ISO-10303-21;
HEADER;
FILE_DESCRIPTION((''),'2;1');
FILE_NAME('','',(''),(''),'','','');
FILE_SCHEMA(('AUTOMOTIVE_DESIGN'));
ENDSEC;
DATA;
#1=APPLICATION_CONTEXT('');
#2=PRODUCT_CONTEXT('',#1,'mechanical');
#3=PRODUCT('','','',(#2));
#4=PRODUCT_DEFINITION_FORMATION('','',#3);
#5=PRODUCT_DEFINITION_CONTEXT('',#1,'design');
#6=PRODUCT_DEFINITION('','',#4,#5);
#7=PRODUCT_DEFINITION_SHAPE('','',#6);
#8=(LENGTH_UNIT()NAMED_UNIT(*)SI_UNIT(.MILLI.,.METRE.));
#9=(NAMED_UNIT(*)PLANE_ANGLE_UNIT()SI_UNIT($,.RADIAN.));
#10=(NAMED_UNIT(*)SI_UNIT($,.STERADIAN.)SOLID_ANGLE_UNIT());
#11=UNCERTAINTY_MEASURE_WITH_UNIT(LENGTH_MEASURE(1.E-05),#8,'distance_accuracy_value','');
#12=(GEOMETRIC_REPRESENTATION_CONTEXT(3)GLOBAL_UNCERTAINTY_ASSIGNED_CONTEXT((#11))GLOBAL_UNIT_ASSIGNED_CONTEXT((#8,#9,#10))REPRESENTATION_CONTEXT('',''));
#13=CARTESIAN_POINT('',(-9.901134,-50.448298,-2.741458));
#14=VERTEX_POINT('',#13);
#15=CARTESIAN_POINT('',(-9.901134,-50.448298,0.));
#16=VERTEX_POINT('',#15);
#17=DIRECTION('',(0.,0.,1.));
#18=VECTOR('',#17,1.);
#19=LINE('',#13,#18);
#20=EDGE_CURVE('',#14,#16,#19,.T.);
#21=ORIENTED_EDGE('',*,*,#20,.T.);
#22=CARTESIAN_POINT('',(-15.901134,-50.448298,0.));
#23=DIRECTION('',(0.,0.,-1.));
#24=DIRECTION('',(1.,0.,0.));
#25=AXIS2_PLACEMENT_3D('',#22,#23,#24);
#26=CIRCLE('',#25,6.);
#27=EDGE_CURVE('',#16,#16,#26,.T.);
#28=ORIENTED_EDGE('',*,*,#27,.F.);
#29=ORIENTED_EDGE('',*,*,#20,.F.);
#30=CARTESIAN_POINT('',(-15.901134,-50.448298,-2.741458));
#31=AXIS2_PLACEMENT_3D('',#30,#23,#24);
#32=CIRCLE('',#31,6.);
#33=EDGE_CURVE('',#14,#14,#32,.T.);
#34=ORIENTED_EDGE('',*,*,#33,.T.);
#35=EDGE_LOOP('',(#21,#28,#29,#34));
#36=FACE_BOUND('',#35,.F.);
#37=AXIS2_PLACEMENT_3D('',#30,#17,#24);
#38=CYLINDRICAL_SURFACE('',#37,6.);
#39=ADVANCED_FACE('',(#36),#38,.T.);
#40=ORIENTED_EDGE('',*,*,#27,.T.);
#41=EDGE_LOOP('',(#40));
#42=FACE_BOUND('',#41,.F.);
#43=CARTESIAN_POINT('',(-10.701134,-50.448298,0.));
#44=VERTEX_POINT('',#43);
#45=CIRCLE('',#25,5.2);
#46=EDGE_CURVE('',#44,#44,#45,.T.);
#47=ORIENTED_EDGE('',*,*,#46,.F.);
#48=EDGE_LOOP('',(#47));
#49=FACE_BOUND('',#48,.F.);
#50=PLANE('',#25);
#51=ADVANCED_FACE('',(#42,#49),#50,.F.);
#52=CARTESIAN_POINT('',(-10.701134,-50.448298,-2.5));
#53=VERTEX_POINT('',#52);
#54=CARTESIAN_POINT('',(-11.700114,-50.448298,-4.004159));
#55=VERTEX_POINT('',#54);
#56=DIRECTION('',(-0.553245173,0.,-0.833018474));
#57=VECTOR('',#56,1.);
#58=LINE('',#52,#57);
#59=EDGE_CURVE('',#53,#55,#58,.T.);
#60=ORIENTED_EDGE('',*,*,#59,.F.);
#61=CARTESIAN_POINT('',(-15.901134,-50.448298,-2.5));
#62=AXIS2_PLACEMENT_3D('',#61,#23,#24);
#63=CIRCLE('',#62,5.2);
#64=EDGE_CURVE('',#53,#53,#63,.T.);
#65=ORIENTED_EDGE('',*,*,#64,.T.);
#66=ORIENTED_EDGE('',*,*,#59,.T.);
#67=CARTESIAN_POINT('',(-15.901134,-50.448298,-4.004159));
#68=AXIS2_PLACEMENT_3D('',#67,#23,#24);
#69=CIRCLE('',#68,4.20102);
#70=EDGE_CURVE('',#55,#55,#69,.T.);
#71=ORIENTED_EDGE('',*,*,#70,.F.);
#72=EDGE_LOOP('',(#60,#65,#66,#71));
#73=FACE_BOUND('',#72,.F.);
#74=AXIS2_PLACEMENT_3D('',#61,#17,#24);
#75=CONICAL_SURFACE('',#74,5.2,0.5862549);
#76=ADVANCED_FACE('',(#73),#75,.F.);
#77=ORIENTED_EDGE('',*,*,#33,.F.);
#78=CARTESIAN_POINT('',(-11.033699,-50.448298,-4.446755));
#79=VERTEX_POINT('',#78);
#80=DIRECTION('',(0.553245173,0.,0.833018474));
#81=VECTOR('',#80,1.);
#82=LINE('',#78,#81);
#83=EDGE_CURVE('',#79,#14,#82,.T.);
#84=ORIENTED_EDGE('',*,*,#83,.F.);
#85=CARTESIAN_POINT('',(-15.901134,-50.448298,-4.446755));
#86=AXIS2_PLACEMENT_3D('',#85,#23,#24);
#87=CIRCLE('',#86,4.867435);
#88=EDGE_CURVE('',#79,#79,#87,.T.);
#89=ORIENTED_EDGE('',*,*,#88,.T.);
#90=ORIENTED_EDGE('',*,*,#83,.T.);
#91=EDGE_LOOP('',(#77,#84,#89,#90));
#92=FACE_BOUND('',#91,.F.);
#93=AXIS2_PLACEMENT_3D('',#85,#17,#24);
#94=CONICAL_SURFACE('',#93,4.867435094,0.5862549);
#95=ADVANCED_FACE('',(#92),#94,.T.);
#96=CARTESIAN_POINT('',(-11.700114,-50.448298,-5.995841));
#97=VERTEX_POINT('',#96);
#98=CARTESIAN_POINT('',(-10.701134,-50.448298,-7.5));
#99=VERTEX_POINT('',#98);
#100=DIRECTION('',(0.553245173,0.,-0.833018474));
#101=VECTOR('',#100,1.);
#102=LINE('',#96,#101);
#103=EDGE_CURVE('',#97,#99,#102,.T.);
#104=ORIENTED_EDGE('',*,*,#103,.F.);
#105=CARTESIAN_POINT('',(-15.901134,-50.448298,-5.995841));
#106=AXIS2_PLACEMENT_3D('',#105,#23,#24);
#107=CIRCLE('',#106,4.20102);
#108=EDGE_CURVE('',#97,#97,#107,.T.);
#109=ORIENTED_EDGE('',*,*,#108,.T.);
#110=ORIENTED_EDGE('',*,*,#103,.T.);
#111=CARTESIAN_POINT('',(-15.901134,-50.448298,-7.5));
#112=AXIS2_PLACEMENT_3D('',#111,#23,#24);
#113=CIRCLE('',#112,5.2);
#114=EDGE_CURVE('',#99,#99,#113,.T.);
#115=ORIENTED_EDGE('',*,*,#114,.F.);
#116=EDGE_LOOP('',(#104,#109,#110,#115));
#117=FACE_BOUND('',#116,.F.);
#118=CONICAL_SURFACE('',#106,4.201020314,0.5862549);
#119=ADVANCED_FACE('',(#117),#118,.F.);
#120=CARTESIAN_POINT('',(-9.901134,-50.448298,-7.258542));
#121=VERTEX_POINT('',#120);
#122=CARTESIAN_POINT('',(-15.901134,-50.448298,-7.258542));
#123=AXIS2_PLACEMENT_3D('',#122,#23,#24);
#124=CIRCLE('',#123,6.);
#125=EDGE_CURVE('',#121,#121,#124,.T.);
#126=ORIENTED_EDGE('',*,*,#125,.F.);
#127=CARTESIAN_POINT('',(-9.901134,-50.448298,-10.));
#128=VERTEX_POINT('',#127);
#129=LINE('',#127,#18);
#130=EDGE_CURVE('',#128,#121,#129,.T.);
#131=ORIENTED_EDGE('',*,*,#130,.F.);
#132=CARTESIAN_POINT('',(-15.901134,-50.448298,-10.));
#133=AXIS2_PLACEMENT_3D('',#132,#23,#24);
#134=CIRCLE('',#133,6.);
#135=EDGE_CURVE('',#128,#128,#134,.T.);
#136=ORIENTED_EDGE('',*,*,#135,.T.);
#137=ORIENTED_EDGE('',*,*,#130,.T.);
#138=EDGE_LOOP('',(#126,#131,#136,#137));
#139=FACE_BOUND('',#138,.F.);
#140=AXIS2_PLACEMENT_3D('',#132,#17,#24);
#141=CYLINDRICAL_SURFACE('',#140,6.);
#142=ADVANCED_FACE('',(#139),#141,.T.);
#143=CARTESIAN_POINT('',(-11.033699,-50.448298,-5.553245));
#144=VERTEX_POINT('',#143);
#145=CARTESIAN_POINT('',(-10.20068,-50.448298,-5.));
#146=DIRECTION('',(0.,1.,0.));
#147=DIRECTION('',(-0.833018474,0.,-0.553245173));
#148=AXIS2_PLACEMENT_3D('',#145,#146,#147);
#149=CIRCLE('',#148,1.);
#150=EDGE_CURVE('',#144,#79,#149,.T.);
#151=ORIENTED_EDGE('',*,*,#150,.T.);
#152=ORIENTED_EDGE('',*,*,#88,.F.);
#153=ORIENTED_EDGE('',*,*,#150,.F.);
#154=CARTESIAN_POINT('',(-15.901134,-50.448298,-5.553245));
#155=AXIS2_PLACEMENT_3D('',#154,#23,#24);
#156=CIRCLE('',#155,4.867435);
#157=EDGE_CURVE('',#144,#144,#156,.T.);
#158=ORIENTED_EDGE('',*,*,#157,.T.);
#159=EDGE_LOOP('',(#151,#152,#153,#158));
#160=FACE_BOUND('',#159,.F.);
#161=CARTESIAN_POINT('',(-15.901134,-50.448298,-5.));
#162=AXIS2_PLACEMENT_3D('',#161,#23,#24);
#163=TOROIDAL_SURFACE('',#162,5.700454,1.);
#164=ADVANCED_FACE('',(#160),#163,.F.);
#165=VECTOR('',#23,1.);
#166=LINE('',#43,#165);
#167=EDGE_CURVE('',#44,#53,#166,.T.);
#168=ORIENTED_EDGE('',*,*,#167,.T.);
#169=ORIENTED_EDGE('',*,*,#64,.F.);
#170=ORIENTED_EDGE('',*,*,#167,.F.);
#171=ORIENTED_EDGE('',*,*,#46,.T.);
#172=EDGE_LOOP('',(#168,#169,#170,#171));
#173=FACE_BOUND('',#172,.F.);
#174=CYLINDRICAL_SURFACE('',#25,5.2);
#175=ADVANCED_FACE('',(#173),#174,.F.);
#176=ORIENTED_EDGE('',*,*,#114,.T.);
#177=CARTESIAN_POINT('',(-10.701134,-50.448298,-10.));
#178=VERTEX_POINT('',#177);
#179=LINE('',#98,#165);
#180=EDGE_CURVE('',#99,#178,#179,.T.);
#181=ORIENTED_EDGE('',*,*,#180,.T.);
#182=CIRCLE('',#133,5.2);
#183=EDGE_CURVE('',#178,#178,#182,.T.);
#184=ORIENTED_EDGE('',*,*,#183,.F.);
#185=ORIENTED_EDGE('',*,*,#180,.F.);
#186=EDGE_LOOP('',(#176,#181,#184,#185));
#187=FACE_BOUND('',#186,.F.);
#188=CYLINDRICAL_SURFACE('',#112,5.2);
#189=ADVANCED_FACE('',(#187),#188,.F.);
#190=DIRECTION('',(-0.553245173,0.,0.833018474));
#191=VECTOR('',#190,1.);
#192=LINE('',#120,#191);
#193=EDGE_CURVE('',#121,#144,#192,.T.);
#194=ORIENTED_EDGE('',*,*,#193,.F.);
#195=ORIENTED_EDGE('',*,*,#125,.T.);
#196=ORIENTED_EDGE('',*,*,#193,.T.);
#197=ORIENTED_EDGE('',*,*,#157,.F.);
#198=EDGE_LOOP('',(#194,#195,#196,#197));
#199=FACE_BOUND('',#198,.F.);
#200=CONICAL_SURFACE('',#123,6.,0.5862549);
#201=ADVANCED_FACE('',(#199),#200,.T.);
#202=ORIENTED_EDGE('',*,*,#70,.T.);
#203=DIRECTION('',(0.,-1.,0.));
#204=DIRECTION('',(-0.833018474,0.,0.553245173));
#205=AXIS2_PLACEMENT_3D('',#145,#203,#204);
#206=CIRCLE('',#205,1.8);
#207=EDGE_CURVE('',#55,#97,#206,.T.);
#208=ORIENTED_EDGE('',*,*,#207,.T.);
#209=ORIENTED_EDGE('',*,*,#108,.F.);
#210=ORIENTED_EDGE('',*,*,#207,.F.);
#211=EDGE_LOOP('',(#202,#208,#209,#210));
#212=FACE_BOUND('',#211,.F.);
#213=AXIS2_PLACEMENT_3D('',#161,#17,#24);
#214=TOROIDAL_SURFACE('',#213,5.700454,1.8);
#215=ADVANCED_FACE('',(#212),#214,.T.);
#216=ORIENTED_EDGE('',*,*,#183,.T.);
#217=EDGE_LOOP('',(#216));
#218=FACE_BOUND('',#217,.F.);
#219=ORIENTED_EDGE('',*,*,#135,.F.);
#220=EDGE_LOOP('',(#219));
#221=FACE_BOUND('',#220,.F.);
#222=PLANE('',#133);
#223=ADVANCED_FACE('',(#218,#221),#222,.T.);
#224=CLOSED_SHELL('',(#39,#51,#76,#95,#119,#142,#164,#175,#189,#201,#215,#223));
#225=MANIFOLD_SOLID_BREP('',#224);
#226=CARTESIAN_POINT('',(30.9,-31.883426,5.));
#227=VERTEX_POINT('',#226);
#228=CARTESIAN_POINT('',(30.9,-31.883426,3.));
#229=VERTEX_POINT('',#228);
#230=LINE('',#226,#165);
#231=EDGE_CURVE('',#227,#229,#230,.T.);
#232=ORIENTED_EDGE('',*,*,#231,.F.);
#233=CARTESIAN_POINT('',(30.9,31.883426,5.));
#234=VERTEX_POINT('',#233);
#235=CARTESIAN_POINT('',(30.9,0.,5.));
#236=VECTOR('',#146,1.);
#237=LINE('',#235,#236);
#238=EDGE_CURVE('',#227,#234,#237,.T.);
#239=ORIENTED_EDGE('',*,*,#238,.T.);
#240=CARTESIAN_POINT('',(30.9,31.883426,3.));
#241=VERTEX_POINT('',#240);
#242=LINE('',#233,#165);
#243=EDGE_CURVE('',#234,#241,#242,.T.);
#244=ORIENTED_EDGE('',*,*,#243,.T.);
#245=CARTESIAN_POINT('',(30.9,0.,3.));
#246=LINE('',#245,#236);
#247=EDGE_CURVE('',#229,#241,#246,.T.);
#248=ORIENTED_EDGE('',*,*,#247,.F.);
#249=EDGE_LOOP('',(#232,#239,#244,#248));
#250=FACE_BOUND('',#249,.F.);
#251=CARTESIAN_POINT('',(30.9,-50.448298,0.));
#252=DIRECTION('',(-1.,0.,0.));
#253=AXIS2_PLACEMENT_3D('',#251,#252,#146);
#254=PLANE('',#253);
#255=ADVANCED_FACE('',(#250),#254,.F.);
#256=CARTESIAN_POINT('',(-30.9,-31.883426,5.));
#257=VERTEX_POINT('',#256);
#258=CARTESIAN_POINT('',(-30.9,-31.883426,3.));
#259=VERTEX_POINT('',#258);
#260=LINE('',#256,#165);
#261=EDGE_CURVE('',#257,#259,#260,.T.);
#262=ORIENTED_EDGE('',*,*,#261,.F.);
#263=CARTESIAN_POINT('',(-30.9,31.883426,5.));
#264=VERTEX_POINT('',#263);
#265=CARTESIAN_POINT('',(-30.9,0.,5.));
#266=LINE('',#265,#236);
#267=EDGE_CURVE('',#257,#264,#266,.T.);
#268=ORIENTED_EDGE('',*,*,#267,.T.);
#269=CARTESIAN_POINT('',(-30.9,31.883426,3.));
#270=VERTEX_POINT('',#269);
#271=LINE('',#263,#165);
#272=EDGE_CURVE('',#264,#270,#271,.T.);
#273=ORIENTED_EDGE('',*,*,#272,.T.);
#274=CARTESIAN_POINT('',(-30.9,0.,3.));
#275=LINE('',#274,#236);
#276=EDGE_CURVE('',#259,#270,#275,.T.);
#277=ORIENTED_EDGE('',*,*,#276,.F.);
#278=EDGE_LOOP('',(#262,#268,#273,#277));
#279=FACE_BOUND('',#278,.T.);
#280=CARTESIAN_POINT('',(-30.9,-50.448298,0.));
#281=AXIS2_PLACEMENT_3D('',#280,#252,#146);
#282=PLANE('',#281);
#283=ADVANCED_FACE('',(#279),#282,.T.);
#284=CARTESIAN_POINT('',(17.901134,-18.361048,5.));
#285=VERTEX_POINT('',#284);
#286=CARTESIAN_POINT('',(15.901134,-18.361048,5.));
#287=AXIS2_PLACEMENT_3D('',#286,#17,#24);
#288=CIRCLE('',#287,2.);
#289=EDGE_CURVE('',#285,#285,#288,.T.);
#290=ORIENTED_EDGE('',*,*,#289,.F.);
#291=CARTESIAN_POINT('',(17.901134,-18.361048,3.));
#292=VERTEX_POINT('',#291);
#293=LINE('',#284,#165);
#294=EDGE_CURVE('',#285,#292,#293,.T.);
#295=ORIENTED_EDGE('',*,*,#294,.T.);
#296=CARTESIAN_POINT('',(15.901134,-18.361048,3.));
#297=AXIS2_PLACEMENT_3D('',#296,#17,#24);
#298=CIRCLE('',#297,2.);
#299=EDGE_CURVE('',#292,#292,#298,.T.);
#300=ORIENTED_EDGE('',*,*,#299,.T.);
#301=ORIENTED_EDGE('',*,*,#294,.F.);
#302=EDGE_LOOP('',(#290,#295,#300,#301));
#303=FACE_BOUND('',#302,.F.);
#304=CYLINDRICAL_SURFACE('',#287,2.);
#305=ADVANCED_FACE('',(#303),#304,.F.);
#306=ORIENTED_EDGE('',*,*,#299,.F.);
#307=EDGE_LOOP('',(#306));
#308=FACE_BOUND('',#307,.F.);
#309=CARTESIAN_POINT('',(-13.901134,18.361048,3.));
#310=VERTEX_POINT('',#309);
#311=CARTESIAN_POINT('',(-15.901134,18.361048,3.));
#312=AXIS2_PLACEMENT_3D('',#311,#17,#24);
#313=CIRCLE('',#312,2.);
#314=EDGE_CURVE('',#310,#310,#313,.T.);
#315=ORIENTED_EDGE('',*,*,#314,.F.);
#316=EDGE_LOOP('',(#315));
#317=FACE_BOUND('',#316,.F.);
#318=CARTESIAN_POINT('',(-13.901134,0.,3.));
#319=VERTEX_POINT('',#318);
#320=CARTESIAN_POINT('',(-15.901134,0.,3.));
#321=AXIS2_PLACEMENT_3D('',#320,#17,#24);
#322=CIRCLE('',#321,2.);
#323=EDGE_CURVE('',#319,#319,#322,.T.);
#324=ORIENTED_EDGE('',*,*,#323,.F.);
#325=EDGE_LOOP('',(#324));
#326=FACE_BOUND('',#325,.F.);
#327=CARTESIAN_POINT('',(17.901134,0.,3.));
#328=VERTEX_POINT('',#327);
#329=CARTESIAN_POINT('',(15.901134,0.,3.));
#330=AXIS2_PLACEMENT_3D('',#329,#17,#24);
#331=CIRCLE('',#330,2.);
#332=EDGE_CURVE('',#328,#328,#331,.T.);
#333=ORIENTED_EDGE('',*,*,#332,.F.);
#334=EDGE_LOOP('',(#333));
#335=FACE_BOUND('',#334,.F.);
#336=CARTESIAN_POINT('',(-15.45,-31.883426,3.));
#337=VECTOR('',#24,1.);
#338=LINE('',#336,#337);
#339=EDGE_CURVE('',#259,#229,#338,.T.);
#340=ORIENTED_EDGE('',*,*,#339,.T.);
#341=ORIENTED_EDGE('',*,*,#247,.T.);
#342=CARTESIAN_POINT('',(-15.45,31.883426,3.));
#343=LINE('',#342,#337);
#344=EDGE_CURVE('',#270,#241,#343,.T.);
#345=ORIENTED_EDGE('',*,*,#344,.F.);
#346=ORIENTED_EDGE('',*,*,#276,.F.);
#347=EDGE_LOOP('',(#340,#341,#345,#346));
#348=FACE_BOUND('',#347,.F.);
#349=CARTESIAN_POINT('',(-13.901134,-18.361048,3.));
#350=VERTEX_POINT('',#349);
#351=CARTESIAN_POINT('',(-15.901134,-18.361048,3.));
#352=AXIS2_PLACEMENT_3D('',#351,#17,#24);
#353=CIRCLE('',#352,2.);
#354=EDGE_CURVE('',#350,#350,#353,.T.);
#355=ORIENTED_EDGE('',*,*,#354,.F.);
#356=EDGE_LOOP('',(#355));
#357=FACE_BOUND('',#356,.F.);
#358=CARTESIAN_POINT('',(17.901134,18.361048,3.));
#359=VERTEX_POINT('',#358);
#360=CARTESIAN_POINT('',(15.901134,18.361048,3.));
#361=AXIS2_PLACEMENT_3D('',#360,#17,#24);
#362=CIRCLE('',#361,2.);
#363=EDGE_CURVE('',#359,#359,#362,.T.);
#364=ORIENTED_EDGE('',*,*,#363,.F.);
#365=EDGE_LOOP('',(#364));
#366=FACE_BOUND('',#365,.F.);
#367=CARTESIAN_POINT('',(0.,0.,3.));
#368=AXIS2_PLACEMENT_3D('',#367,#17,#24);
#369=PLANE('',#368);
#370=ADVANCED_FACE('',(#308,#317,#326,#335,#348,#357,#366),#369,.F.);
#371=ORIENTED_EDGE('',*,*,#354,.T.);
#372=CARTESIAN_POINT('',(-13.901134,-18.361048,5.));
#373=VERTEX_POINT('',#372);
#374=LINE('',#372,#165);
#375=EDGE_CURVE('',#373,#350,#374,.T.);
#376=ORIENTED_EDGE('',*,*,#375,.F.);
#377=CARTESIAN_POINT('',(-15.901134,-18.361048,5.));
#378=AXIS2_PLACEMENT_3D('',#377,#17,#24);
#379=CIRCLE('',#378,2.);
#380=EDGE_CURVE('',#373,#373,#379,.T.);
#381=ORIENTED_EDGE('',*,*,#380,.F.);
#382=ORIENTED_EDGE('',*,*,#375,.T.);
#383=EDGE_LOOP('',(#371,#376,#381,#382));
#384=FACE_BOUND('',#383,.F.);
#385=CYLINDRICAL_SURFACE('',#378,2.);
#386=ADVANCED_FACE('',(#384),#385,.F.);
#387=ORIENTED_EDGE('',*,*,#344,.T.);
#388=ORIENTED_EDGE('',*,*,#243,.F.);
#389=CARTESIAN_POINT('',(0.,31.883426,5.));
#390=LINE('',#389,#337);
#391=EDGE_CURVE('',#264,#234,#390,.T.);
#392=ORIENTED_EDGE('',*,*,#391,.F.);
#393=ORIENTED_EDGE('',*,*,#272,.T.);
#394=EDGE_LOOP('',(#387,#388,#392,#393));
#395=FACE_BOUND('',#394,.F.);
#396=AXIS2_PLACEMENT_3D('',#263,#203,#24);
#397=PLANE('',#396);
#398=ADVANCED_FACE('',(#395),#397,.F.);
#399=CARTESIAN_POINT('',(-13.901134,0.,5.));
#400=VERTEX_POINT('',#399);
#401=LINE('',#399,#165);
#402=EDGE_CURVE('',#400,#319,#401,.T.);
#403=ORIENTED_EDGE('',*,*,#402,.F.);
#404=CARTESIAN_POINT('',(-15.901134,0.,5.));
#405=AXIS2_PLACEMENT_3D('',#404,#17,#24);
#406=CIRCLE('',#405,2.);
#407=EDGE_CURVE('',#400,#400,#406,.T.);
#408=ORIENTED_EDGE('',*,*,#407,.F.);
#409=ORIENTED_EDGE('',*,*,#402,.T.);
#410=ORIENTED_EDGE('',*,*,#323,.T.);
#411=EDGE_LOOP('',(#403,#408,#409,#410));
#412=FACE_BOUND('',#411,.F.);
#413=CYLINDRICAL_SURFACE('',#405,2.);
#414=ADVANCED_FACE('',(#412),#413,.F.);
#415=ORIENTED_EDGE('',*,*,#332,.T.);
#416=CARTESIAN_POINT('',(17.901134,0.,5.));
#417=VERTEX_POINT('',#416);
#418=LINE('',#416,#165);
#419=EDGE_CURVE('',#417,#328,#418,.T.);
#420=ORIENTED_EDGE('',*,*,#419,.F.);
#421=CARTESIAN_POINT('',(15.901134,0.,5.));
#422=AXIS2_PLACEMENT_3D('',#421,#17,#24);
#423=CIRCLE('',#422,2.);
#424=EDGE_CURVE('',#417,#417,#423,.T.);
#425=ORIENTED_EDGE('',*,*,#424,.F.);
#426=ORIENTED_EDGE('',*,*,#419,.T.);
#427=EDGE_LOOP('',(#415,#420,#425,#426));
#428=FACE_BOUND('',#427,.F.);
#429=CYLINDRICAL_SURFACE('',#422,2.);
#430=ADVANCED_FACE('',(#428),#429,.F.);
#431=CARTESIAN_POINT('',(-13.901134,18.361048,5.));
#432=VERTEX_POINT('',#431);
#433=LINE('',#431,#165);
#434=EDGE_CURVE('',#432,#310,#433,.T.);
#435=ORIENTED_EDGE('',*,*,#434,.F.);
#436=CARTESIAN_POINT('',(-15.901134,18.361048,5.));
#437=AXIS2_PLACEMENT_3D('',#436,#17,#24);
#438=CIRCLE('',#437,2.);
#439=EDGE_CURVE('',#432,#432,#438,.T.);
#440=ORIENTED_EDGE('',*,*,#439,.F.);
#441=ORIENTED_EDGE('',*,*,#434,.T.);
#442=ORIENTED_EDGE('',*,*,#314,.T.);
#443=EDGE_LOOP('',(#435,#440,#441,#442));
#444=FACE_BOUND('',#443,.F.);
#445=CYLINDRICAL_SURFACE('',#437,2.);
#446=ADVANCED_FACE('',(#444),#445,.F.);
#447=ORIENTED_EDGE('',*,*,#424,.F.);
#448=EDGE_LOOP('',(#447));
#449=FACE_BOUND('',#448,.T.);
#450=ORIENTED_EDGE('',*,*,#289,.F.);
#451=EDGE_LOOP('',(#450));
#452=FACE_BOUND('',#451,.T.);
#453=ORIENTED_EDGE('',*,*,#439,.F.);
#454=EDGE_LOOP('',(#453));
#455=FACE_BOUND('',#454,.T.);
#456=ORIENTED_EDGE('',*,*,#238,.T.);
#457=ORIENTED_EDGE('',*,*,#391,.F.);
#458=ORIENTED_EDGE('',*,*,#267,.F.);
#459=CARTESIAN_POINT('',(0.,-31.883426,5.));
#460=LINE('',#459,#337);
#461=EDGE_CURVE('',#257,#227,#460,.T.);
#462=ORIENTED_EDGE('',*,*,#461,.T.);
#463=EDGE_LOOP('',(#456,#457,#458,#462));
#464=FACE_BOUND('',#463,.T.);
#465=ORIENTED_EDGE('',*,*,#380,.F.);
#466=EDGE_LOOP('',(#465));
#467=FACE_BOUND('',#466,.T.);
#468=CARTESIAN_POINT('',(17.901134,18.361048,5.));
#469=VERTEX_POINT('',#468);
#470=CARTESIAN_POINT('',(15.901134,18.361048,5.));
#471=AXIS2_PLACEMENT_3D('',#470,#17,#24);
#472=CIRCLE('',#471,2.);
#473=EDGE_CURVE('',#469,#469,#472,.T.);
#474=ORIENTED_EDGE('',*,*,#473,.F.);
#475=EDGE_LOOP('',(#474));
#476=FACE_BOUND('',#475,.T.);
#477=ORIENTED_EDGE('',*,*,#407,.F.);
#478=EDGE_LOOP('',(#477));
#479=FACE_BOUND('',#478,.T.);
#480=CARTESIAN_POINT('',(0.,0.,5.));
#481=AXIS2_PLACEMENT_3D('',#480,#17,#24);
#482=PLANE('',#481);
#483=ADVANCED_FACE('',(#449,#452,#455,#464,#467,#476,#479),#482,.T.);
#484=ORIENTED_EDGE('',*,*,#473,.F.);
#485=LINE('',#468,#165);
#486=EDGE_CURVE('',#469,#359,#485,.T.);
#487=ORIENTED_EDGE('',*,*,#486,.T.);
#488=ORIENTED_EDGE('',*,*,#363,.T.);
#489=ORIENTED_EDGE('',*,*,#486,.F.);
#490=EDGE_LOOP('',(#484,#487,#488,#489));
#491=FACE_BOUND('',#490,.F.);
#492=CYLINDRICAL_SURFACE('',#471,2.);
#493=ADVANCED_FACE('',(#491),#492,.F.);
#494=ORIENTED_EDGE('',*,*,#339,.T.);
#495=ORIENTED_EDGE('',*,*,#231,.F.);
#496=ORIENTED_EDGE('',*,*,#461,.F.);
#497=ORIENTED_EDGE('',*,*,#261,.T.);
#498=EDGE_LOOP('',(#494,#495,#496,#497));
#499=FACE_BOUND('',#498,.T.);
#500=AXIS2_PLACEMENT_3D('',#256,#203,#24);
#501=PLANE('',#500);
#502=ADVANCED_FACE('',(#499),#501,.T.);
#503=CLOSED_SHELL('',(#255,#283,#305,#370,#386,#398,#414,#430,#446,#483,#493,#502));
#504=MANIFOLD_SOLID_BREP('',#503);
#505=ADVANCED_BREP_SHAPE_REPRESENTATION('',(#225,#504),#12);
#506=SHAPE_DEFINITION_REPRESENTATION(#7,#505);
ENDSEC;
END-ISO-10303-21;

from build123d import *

# Parameters (mm, degrees)
F0_W     = 61.8
F0_H     = 100.8965958967
F1_DEPTH = 5
F4_R     = 2
F4_W     = 61.8
F4_H     = 18.5648719378
F5_DEPTH = 25
F7_DEPTH = 3


with BuildPart() as f1:
    # F0 (on Top) → F1 (new body)
    with BuildSketch(Plane.XY):
        Rectangle(F0_W, F0_H)
    extrude(amount=F1_DEPTH)

    # F4 (on face) → F5 (cut)
    with BuildSketch(Plane.XY.offset(5)):
        with Locations((-15.9011339205, 0)):
            Circle(F4_R)
        with Locations((-15.9011339205, -18.3610478988)):
            Circle(F4_R)
        with Locations((15.9011339205, 18.3610478988)):
            Circle(F4_R)
        with Locations((15.9011339205, 0)):
            Circle(F4_R)
        with Locations((15.9011339205, -18.3610478988)):
            Circle(F4_R)
        with Locations((-15.9011339205, 18.3610478988)):
            Circle(F4_R)
        with Locations((0, 41.1658619795)):
            Rectangle(F4_W, F4_H)
        with Locations((0, -41.1658619795)):
            Rectangle(F4_W, F4_H)
    extrude(amount=-F5_DEPTH, mode=Mode.SUBTRACT)

    # F7 (cut): a face of the model
    f7_faces = [f1.faces().sort_by_distance(p)[0] for p in [
        (0, 0, 0),
    ]]
    extrude(f7_faces, amount=-F7_DEPTH, mode=Mode.SUBTRACT)


with BuildPart() as f3:
    # F2 (on face) → F3 (revolve)
    with BuildSketch(Plane.XZ.offset(50.4482979484)):
        with BuildLine():
            Line((-9.9011339205, 0), (-10.7011339205, 0))
            Line((-10.7011339205, 0), (-10.7011339205, -2.5))
            Line((-10.7011339205, -2.5), (-11.7001136063, -4.0041586889))
            ThreePointArc((-11.7001136063, -4.0041586889), (-12.0006803523, -5), (-11.7001136063, -5.9958413111))
            Line((-11.7001136063, -5.9958413111), (-10.7011339205, -7.5))
            Line((-10.7011339205, -7.5), (-10.7011339205, -10))
            Line((-10.7011339205, -10), (-9.9011339205, -10))
            Line((-9.9011339205, -10), (-9.9011339205, -7.2585424564))
            Line((-9.9011339205, -7.2585424564), (-11.0336988267, -5.5532451728))
            ThreePointArc((-11.0336988267, -5.5532451728), (-11.2006803523, -5), (-11.0336988267, -4.4467548272))
            Line((-11.0336988267, -4.4467548272), (-9.9011339205, -2.7414575436))
            Line((-9.9011339205, -2.7414575436), (-9.9011339205, 0))
        make_face()
    revolve(axis=Axis((-15.9011339205, -50.4482979484, -5), (0, 0, -1)))


solid = Compound([f1.part, f3.part])
